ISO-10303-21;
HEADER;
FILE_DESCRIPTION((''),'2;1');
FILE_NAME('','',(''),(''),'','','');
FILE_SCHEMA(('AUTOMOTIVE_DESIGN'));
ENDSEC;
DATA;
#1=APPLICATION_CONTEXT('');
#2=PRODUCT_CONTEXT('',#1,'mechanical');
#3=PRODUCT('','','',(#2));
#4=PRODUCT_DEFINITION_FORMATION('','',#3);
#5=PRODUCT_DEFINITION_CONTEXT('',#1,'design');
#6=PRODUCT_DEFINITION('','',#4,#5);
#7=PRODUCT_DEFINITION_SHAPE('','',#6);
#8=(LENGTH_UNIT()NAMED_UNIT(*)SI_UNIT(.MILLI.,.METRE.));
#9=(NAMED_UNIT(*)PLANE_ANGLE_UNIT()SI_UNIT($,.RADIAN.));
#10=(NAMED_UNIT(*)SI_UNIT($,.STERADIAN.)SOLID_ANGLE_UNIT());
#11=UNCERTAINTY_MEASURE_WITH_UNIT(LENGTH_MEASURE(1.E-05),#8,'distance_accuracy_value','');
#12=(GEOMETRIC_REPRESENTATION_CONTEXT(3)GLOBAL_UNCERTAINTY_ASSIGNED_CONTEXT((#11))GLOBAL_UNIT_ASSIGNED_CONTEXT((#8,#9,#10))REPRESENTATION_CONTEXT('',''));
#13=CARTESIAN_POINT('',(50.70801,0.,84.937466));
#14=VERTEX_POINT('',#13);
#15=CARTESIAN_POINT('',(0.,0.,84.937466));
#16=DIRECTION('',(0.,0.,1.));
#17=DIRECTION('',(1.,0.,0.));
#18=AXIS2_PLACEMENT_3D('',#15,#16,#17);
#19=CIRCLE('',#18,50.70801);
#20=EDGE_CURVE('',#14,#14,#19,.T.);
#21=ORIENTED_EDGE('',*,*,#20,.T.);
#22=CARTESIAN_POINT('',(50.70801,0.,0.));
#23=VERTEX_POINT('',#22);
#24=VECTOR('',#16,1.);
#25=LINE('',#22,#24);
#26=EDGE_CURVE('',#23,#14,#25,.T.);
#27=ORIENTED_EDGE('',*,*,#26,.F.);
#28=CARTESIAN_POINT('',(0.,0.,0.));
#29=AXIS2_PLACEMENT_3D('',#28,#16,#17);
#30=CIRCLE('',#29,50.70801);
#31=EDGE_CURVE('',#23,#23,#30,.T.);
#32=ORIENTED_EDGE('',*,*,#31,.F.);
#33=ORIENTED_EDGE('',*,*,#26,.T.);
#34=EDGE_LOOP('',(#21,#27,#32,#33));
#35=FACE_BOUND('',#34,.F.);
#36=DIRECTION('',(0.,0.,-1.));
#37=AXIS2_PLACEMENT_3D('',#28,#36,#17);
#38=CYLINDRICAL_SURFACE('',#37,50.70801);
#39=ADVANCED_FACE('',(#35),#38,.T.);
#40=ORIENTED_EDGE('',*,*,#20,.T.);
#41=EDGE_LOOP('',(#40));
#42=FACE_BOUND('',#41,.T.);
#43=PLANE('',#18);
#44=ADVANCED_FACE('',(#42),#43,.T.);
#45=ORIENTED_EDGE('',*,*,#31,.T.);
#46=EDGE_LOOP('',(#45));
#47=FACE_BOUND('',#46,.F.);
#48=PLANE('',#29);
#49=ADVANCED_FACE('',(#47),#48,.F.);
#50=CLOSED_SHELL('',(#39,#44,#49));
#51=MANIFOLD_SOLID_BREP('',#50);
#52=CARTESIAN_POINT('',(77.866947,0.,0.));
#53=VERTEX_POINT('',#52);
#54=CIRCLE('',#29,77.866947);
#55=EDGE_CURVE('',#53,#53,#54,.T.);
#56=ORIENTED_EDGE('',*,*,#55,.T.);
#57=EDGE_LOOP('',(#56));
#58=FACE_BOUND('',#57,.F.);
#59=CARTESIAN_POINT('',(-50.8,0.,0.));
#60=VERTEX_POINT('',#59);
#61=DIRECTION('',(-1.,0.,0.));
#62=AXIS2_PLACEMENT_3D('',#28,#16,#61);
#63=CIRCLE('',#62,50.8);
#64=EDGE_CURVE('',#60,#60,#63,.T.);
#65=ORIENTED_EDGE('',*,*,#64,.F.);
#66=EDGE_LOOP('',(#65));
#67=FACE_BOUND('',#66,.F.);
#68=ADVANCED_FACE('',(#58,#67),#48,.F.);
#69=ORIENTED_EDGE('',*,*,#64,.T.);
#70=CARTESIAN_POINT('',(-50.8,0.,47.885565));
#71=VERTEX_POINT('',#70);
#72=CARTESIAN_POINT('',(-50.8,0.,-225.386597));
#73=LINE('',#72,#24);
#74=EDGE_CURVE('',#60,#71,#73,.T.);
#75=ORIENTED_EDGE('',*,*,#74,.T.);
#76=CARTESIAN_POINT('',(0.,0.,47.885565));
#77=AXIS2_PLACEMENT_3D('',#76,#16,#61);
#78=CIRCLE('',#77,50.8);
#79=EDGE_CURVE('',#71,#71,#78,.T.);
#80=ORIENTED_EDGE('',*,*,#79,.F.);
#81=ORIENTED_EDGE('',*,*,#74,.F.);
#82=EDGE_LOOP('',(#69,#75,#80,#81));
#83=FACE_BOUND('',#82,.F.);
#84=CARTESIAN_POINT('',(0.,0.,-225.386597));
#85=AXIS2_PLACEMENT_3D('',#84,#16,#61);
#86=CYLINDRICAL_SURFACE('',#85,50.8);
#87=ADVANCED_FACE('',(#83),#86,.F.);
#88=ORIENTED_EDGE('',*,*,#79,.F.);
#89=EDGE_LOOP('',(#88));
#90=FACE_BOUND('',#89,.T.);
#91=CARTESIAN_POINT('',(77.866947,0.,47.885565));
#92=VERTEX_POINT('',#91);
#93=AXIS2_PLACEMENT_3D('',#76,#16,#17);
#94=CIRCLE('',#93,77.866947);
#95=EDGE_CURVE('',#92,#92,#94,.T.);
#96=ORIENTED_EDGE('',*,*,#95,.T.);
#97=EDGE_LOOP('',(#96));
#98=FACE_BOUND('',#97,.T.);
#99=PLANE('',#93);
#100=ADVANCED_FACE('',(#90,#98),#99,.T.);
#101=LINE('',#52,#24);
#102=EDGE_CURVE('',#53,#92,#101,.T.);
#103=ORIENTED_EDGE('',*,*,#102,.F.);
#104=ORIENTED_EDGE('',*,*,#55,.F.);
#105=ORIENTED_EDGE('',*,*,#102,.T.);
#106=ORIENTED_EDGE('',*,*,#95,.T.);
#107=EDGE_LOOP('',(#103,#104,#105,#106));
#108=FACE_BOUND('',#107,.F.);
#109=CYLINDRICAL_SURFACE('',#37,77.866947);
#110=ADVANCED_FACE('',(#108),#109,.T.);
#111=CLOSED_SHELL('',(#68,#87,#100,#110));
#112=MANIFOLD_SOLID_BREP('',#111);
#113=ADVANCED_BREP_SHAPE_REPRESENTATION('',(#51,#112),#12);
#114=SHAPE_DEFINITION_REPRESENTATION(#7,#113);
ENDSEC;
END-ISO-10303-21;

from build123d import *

# Parameters (mm, degrees)
F3_R     = 77.8669465494
F4_DEPTH = 47.8855650872
F5_D     = 101.6
F8_R     = 50.7080101121
F9_DEPTH = 84.9374663085


# Not quite as in the source:
# - the program builds the solid bodies; features that only make, move or delete a surface that nothing else refers to are left out


with BuildPart() as f4:
    # F3 (on face) → F4 (new body)
    with BuildSketch(Plane.XY):
        Circle(F3_R)
    extrude(amount=F4_DEPTH)

    # F5 (through all)
    with Locations(Plane(origin=(0, 0, 0), x_dir=(1, 0, 0), z_dir=(0, 0, -1))):
        with Locations((0, 0)):
            Hole(F5_D / 2)


with BuildPart() as f9:
    # F8 (on face) → F9 (new body)
    with BuildSketch(Plane.XY):
        Circle(F8_R)
    extrude(amount=F9_DEPTH)


solid = Compound([f4.part, f9.part])
